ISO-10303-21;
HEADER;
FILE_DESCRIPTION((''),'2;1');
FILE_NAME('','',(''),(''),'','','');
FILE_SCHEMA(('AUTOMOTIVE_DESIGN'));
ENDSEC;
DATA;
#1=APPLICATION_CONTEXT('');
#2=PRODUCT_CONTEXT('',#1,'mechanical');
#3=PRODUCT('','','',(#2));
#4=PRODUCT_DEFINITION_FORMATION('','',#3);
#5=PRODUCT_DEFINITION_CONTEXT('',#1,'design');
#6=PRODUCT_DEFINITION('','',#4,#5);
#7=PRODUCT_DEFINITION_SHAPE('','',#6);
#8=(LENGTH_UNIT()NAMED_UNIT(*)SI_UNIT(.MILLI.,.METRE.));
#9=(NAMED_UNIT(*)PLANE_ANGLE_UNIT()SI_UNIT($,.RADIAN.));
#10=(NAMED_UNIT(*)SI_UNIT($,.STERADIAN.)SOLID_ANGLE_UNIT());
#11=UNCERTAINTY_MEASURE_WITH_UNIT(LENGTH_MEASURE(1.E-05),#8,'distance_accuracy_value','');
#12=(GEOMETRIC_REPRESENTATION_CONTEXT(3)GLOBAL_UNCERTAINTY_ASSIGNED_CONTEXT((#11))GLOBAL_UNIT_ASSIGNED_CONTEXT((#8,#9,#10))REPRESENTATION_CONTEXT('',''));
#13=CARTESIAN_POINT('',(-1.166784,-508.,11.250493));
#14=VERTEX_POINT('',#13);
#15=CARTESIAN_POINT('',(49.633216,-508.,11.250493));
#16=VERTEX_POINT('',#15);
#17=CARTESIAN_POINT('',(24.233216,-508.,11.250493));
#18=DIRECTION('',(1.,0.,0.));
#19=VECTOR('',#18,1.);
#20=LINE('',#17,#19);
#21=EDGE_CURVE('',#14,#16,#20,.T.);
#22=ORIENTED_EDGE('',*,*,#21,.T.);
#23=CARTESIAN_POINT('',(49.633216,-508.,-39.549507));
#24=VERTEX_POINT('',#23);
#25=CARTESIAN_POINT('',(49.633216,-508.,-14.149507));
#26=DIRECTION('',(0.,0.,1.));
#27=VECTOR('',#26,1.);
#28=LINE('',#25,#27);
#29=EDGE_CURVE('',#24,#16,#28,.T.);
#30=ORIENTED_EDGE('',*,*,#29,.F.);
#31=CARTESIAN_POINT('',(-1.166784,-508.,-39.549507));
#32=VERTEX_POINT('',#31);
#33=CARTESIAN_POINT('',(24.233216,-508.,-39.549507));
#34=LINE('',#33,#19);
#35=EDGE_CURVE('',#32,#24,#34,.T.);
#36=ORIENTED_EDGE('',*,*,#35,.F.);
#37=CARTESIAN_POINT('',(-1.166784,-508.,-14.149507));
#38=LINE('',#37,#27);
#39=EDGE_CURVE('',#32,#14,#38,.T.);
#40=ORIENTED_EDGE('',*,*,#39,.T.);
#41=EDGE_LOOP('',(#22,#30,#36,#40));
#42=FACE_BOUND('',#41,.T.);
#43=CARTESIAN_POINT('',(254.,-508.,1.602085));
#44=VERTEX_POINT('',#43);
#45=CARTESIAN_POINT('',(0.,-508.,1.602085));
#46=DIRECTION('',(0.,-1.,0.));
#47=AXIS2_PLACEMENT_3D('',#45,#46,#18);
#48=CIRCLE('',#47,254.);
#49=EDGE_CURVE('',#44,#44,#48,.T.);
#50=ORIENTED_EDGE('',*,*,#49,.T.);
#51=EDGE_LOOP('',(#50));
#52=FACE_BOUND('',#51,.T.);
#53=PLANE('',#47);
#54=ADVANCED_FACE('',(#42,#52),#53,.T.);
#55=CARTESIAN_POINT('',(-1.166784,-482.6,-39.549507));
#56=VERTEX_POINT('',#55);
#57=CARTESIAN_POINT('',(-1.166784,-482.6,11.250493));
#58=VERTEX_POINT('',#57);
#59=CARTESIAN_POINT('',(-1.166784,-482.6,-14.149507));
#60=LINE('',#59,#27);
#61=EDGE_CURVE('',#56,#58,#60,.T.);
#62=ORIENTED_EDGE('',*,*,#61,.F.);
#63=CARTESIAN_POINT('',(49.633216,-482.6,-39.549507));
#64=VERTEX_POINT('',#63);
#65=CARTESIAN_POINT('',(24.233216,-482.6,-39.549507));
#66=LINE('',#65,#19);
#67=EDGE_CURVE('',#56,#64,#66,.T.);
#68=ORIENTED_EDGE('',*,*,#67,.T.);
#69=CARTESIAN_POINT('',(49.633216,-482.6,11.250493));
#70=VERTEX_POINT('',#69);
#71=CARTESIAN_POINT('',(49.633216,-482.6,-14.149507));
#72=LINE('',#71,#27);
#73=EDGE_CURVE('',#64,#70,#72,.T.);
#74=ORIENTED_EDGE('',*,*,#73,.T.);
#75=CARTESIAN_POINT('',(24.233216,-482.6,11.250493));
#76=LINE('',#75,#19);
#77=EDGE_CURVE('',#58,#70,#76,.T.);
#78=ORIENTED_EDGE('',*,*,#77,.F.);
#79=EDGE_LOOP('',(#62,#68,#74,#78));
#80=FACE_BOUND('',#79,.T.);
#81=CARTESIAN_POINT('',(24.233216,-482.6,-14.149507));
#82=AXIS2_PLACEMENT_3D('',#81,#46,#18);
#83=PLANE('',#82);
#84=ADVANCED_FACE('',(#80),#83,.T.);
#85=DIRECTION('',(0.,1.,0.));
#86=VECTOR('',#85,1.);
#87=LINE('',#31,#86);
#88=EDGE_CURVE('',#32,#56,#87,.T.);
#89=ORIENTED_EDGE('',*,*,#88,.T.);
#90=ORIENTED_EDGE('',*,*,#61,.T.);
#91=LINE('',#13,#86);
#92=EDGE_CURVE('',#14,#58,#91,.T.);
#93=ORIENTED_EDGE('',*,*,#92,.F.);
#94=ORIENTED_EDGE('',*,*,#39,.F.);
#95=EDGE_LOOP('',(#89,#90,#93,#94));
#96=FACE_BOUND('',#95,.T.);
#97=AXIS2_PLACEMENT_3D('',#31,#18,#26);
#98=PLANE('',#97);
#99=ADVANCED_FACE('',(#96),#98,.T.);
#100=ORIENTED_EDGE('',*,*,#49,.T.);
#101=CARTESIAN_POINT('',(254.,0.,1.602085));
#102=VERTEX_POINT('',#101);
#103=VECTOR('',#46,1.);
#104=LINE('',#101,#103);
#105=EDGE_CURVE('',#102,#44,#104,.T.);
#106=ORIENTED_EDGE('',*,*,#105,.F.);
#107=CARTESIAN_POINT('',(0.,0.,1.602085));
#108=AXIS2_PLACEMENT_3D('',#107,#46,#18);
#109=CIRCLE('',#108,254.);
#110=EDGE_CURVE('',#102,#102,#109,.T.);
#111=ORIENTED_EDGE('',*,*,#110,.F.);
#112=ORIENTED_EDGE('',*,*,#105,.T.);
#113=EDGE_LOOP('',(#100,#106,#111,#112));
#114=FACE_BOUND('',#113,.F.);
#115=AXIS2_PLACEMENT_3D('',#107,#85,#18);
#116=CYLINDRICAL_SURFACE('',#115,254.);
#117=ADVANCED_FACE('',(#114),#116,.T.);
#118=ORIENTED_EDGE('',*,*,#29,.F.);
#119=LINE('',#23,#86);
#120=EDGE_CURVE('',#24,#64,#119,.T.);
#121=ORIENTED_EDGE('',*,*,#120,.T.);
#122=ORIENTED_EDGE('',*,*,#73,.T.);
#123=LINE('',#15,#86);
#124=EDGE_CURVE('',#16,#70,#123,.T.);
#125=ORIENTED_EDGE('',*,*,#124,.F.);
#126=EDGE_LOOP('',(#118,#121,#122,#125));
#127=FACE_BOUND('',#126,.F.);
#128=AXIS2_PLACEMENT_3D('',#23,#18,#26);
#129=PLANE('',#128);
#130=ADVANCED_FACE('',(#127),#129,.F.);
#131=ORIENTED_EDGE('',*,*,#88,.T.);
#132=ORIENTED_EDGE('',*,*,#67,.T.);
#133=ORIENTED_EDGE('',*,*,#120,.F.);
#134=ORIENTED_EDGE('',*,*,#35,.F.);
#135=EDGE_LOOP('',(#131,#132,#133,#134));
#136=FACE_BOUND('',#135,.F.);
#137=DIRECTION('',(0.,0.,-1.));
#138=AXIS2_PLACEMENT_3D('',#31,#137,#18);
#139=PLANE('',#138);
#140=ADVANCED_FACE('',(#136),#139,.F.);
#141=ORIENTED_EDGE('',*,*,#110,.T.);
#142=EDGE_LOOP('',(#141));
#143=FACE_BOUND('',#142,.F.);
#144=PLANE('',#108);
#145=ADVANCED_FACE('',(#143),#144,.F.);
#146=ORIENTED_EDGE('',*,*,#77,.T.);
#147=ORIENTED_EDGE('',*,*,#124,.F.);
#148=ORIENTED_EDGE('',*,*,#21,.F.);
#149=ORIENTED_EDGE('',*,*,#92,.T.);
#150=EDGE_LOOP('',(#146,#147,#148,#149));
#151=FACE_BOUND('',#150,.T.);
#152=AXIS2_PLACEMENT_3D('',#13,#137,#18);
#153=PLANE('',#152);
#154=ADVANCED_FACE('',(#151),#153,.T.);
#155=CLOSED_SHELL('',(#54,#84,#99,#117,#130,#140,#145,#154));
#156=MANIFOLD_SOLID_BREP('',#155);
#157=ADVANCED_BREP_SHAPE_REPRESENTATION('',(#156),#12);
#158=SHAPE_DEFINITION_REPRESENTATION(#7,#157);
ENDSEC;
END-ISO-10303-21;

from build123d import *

# Parameters (mm, degrees)
F0_R          = 254
F1_DEPTH      = 508
F2_W          = 50.8
F2_H          = 50.8
F3_DEPTH      = 25.4
F3_DEPTH_BACK = 1134


# Not quite as in the source:
# - an extrude ends at something that could not be found from the text; its depth is read off the source's solid


with BuildPart() as f1:
    # F0 (on Front) → F1 (new body)
    with BuildSketch(Plane.XZ):
        with Locations((0, 1.6020847252)):
            Circle(F0_R)
    extrude(amount=F1_DEPTH)

    # F2 (on face) → F3 (cut, two sides)
    with BuildSketch(Plane.XZ.offset(508)) as f3_sk:
        with Locations((24.2332161129, -14.1495072007)):
            Rectangle(F2_W, F2_H)
    extrude(amount=-F3_DEPTH, mode=Mode.SUBTRACT)
    extrude(f3_sk.sketch, amount=F3_DEPTH_BACK, mode=Mode.SUBTRACT)


solid = f1.part
